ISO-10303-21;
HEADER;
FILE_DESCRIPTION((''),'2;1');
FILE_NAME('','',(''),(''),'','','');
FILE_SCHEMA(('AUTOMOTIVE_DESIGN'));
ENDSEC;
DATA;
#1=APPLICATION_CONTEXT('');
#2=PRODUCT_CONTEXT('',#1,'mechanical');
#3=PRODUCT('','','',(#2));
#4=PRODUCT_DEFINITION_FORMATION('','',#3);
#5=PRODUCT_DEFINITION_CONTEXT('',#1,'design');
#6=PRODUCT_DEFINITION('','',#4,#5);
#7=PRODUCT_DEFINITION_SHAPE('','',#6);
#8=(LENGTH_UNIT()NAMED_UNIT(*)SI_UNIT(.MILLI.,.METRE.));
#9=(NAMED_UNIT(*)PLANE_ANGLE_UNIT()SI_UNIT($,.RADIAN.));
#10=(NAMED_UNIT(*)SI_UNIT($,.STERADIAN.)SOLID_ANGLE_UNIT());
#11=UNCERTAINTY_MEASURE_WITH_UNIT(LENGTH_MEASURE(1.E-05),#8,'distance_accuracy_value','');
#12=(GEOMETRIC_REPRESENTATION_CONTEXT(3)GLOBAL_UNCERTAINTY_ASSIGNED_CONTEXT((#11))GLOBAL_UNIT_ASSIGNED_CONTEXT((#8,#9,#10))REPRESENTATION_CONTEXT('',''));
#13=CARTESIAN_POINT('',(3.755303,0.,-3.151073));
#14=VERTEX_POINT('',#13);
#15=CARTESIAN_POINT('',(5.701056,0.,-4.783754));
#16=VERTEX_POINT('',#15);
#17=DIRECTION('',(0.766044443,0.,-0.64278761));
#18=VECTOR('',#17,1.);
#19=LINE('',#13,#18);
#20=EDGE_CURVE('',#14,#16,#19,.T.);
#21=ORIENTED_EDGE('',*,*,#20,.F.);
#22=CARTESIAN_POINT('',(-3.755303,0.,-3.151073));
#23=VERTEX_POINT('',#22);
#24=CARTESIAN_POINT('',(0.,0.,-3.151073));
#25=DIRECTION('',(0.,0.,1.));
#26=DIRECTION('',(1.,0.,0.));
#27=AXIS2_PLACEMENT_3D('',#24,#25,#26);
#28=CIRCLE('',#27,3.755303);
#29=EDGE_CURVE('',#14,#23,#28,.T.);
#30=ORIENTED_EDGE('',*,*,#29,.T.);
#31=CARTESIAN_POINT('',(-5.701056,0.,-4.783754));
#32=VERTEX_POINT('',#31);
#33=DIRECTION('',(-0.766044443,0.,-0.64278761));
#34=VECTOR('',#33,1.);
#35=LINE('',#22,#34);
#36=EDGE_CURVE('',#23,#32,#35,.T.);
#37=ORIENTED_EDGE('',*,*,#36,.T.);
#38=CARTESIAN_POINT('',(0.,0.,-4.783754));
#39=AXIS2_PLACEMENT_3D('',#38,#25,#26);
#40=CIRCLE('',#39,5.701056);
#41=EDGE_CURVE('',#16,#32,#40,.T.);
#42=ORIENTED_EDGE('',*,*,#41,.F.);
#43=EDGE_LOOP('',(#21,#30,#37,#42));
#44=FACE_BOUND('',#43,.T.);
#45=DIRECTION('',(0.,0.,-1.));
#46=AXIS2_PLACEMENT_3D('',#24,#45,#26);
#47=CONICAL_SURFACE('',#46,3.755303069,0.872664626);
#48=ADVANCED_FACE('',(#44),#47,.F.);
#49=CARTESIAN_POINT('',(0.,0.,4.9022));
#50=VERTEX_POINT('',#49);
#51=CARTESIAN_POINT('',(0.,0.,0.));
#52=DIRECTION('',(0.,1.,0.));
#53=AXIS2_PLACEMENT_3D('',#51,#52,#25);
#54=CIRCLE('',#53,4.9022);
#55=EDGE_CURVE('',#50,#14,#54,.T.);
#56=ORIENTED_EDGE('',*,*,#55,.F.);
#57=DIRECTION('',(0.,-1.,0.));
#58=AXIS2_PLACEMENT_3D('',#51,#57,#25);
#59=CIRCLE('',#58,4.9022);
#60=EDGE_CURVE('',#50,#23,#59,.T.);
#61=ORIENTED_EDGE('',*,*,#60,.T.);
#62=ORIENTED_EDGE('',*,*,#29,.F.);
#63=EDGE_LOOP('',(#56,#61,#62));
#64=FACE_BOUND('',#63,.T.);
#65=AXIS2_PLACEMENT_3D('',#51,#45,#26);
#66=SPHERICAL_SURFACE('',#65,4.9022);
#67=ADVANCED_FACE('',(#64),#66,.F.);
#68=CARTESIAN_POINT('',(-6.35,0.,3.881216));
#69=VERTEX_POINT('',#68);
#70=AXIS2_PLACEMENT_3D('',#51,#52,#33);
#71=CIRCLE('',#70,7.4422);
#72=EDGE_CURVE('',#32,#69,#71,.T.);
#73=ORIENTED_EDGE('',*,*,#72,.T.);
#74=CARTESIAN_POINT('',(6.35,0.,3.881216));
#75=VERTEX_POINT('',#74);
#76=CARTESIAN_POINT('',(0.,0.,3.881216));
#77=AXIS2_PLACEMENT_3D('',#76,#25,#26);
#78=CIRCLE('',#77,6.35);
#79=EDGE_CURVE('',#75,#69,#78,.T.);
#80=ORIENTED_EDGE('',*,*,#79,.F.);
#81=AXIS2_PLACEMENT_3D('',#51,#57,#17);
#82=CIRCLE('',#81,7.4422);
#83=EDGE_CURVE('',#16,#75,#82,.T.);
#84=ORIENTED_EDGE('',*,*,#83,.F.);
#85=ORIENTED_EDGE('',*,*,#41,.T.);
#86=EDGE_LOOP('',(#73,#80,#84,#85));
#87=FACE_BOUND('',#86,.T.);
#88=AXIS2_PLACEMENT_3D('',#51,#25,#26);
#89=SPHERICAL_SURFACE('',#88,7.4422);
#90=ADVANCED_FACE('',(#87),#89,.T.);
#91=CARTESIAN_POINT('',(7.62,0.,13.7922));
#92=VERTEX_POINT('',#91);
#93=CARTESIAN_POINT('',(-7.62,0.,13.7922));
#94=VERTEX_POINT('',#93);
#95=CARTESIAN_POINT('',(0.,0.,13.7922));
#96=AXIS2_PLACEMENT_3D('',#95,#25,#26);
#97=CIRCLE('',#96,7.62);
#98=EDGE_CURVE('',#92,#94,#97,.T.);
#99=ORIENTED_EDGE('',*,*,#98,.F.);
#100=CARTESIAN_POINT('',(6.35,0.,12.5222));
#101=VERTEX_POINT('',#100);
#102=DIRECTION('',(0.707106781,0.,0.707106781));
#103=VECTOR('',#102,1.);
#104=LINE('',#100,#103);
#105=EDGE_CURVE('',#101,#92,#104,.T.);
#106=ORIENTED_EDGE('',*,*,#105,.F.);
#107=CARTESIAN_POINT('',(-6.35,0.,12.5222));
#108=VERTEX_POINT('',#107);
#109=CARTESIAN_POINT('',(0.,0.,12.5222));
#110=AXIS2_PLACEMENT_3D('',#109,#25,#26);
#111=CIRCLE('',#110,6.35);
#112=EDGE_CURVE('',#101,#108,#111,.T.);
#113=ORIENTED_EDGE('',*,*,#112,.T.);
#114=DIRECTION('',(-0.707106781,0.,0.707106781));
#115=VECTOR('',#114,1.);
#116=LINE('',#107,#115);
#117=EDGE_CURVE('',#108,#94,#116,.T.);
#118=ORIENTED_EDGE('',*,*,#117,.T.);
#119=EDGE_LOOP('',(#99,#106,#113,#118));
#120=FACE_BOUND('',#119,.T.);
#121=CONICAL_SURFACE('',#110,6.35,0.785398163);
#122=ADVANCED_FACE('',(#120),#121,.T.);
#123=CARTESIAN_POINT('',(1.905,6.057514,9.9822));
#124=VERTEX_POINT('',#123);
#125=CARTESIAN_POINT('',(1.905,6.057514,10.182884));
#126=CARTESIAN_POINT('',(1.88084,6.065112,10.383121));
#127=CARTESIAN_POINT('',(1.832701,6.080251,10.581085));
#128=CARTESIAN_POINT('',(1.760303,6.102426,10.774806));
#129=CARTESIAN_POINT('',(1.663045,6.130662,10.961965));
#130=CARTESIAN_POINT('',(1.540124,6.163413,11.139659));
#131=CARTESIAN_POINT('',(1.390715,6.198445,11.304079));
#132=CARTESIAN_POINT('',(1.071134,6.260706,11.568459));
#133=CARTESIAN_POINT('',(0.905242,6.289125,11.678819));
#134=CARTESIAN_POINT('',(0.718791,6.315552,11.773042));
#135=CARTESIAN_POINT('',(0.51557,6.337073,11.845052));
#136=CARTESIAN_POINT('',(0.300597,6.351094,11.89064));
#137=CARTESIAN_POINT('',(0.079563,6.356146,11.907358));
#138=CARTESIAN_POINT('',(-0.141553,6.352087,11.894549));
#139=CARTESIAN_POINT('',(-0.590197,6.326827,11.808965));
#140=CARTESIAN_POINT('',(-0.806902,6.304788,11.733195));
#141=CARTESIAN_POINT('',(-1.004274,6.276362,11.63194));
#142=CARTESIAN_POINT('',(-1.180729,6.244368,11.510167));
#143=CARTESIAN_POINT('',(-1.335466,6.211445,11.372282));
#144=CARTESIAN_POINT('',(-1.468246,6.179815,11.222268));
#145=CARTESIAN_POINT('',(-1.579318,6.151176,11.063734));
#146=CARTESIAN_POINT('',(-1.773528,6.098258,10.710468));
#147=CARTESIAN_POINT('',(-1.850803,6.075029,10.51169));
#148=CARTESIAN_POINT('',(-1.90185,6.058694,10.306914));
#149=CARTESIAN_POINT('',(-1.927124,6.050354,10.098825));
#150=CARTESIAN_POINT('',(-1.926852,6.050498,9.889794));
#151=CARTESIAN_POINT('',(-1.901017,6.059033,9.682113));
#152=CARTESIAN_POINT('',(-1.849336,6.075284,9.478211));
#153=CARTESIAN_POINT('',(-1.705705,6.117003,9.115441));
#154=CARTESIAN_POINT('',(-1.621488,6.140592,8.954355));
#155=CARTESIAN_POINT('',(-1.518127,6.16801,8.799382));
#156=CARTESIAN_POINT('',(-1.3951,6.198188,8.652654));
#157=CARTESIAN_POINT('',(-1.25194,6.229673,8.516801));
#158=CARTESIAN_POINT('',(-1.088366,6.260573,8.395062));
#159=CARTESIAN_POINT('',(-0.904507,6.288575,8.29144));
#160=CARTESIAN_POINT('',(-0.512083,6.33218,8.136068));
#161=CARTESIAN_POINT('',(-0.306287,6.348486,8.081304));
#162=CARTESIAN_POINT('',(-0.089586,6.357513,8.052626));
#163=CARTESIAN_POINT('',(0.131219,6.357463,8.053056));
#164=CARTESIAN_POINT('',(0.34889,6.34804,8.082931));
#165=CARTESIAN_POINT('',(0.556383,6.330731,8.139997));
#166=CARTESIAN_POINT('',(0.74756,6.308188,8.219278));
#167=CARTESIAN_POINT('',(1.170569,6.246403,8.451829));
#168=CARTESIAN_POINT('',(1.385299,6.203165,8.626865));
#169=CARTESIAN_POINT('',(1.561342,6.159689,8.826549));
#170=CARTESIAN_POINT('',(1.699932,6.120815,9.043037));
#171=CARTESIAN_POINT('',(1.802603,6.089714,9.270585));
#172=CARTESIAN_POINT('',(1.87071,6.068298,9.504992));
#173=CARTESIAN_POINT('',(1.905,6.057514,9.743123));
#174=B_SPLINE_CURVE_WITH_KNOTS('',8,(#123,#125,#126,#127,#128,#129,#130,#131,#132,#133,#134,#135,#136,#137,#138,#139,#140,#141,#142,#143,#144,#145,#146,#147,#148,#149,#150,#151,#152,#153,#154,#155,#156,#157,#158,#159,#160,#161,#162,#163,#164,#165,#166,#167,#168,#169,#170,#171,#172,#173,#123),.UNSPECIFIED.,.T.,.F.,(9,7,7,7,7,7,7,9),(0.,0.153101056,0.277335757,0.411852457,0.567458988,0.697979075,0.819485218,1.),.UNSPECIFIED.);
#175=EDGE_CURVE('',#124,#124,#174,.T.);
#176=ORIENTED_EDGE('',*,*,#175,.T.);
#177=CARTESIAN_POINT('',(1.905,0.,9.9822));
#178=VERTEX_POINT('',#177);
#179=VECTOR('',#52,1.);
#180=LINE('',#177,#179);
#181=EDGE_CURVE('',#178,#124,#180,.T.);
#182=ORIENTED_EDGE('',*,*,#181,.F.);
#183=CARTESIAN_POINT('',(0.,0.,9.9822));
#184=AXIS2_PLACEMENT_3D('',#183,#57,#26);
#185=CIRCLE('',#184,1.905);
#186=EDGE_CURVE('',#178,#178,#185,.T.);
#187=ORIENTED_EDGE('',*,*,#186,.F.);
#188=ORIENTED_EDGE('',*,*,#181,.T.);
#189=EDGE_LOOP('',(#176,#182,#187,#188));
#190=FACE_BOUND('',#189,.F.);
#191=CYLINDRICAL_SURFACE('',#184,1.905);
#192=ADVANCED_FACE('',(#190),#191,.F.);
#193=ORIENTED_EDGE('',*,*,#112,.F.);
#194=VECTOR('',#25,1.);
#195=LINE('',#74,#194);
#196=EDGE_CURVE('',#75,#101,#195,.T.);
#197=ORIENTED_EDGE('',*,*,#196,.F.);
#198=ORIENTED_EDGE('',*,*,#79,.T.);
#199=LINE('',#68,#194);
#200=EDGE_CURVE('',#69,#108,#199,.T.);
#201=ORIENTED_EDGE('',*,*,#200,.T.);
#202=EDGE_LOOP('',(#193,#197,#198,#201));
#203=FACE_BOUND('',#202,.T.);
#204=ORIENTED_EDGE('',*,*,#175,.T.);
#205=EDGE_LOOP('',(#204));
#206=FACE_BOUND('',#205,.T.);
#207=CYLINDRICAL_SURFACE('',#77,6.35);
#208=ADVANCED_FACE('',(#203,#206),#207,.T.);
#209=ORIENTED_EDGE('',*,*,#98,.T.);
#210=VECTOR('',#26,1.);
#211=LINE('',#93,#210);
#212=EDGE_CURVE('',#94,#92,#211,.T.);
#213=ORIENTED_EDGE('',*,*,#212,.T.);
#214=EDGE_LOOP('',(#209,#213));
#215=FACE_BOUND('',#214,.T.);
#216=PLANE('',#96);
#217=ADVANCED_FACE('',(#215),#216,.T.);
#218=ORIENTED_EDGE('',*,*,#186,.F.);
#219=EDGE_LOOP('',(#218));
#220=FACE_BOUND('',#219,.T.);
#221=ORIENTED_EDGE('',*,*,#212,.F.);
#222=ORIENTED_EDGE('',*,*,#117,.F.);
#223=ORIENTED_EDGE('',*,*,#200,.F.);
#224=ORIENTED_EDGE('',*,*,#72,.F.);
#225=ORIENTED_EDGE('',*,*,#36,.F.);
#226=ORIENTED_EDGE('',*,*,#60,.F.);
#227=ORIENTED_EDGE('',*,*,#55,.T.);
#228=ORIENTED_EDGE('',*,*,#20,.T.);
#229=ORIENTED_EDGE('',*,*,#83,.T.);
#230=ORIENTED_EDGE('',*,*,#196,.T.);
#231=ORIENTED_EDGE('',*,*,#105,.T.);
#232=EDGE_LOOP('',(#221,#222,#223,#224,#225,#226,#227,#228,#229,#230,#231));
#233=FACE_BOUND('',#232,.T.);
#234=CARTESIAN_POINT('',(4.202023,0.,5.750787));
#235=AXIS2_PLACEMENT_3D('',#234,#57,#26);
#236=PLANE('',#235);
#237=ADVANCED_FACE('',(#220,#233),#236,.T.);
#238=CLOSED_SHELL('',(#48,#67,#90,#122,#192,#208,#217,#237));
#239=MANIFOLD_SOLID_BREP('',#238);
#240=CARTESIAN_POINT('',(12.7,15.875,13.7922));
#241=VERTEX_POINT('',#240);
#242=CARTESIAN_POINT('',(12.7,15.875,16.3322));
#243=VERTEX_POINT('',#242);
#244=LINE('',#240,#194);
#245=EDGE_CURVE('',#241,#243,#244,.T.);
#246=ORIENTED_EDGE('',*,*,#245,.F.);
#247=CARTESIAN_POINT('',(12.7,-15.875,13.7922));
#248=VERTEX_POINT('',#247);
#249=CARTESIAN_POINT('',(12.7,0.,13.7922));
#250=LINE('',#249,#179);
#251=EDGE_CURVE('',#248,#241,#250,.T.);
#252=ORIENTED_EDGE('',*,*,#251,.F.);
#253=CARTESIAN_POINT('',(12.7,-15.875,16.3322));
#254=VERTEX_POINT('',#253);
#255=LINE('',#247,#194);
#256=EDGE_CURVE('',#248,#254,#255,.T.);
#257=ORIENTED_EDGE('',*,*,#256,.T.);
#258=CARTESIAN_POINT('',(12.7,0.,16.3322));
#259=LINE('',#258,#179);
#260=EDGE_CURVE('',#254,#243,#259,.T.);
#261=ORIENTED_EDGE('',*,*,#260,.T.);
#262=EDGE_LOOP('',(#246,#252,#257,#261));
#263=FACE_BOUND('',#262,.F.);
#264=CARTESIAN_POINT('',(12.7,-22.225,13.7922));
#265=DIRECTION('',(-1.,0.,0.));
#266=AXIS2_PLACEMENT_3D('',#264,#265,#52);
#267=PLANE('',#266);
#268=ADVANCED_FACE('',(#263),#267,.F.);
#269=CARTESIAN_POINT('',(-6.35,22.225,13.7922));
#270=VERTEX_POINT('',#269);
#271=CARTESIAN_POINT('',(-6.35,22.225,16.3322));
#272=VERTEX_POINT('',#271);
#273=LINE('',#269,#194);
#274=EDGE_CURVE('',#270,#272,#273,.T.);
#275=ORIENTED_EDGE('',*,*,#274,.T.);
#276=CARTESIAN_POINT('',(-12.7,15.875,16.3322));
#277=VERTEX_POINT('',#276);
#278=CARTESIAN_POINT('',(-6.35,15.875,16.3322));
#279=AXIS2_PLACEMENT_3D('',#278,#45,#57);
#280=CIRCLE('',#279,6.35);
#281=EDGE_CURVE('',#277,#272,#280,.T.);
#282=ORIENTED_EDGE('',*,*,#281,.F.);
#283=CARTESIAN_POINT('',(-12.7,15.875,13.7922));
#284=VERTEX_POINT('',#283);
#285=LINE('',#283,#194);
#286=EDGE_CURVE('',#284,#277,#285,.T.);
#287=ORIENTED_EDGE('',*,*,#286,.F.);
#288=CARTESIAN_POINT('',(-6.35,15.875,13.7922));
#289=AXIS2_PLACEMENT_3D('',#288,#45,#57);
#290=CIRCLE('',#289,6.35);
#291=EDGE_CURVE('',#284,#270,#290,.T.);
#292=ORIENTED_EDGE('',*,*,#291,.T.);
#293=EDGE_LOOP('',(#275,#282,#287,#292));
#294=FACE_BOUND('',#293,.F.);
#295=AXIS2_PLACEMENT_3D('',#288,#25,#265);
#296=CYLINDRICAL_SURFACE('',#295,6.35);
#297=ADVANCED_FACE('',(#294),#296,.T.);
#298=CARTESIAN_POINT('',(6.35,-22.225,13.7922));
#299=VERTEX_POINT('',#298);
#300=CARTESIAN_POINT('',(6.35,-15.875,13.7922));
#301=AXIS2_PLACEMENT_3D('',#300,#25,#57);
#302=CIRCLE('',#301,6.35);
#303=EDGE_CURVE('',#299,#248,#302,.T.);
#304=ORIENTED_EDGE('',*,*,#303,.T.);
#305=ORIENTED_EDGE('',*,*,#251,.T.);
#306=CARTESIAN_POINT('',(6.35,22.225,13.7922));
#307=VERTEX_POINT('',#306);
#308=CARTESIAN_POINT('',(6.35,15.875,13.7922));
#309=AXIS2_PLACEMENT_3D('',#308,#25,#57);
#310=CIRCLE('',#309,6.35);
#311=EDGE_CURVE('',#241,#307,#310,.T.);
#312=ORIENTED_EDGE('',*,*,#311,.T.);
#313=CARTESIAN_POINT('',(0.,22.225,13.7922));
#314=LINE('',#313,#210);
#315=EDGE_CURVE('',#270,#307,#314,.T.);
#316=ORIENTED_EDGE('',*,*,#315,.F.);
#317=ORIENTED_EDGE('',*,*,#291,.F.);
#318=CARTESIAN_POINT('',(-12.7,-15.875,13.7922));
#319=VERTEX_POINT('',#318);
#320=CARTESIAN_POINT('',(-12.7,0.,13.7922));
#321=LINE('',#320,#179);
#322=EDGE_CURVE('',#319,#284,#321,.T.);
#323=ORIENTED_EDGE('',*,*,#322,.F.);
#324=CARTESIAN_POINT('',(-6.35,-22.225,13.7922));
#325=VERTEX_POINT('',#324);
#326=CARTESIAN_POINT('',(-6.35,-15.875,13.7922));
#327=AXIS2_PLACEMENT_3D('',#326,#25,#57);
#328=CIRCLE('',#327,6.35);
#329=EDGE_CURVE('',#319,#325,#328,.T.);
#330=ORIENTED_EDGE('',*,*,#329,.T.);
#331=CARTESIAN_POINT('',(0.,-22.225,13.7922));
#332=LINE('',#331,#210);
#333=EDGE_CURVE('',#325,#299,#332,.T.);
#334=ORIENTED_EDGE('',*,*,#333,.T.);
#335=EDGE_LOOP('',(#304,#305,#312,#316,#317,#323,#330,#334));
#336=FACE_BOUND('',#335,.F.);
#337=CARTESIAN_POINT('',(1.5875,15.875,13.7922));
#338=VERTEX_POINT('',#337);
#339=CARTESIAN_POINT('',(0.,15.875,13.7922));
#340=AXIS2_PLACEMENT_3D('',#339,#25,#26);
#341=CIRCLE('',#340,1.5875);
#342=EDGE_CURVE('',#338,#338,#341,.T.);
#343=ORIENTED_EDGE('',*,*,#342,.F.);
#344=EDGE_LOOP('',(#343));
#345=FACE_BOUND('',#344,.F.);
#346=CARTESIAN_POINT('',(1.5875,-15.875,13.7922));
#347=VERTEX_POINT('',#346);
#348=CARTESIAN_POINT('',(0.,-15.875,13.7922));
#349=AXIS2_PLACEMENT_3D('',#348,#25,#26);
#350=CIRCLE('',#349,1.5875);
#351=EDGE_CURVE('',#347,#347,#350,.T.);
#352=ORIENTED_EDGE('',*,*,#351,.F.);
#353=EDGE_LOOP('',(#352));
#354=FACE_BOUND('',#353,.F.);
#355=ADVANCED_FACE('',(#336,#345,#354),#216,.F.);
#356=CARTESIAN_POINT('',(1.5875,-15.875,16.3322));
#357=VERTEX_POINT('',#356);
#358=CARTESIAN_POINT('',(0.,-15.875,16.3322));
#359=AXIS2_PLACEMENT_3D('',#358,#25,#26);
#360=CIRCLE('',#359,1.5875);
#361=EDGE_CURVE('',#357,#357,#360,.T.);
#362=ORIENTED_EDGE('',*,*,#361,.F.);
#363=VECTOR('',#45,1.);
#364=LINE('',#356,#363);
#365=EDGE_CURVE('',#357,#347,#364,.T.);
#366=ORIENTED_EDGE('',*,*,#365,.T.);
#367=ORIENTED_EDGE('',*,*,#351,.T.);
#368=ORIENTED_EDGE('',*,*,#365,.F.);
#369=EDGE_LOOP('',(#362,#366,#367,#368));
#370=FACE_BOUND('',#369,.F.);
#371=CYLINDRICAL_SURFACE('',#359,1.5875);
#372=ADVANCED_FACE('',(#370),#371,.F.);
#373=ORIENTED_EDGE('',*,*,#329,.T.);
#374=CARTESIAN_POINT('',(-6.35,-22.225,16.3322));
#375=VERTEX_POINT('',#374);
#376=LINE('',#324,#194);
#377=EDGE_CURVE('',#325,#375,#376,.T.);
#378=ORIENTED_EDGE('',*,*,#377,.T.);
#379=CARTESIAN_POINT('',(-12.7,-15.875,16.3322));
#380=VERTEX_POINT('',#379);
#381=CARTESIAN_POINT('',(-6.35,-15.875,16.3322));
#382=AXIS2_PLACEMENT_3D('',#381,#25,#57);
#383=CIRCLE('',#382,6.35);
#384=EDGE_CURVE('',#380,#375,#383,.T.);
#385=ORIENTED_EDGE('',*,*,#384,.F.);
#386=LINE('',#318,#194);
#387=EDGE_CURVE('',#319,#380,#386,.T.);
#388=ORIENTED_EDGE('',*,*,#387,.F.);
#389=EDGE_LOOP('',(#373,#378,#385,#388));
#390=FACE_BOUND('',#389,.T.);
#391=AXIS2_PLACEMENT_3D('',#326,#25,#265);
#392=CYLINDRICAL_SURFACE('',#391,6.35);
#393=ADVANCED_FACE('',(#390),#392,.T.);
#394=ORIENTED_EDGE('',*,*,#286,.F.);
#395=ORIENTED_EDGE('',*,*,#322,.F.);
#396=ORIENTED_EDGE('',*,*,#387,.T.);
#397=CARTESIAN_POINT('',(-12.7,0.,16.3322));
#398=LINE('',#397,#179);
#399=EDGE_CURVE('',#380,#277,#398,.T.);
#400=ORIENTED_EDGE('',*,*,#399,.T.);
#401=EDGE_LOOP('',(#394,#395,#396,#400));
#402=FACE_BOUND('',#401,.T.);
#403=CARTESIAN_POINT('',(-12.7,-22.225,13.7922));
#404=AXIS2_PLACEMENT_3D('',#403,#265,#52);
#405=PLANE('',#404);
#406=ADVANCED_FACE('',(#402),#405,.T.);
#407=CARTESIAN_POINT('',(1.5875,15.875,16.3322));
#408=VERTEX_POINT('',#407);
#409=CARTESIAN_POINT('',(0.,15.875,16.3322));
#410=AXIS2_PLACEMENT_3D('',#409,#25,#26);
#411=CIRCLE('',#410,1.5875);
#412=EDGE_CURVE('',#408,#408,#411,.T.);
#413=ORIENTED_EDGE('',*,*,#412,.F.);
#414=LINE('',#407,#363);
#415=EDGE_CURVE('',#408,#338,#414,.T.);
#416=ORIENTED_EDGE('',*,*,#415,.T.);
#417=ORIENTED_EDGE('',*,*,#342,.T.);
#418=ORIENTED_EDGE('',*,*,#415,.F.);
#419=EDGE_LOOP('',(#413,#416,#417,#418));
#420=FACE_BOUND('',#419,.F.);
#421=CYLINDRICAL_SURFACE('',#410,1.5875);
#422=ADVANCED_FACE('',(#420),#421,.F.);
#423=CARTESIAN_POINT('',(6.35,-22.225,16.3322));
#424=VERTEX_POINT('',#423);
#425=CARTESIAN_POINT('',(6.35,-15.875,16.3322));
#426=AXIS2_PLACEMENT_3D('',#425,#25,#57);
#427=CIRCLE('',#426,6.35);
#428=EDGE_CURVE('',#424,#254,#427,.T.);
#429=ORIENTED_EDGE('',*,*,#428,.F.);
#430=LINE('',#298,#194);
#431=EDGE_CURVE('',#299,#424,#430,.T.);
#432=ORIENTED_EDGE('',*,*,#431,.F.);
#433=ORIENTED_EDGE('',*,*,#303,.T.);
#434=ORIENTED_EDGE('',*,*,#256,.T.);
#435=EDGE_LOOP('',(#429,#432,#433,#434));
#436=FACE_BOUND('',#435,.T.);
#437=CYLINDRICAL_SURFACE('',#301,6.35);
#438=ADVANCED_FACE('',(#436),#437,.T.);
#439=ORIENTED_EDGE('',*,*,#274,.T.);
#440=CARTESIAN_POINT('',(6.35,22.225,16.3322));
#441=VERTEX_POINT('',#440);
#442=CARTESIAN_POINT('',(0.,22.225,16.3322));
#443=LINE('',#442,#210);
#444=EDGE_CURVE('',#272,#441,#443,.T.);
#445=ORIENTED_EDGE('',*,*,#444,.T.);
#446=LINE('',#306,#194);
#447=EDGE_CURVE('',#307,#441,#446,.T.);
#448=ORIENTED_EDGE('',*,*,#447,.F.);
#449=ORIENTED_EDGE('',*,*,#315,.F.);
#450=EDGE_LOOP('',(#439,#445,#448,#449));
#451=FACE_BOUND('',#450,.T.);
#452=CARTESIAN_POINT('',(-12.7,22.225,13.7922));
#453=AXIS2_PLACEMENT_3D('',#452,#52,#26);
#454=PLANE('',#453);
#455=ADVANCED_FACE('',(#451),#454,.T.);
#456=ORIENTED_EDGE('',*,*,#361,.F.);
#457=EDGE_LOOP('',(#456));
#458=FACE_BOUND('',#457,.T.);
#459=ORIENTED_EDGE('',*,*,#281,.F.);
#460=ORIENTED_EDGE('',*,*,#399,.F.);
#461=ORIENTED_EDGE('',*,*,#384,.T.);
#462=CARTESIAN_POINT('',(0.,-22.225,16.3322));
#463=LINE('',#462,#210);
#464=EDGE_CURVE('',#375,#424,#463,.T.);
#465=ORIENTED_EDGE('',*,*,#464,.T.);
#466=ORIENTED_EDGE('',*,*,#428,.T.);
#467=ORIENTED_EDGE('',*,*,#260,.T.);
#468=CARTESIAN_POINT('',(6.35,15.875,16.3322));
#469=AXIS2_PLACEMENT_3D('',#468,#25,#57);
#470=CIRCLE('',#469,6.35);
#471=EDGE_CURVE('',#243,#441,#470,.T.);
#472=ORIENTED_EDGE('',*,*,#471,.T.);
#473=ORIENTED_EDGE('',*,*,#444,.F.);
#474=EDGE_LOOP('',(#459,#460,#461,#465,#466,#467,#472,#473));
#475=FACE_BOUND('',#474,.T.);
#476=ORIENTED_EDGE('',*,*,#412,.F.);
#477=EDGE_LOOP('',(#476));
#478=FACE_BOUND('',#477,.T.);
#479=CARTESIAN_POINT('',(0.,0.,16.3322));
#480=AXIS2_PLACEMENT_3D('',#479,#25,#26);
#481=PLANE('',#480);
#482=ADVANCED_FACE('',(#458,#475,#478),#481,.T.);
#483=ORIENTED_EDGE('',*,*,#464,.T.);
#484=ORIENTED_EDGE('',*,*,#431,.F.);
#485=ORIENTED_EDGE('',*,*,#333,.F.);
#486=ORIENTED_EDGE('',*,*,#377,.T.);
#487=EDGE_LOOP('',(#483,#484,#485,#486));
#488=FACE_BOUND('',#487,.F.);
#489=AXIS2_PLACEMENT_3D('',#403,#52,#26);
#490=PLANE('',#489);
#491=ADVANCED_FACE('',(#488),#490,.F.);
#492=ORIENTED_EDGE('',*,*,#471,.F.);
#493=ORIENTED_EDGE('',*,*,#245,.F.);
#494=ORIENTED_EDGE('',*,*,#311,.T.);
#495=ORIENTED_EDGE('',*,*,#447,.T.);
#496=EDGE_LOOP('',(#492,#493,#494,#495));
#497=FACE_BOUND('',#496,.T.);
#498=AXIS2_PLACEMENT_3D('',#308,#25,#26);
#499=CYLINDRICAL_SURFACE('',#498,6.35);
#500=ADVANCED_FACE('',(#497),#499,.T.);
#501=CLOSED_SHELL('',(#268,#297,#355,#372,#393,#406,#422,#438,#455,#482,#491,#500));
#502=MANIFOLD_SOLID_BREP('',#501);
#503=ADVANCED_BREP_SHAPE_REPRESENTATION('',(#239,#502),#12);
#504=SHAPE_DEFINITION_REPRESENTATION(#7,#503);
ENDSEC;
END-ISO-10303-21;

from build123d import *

# Parameters (mm, degrees)
F1_ANGLE = 180
F3_R     = 1.905
F4_DEPTH = 7.621
F5_W     = 25.4
F5_H     = 44.45
F6_DEPTH = 2.54
F7_R     = 6.35
F8_R     = 1.5875
F9_DEPTH = 21.1169539488


with BuildPart() as f1:
    # F0 (on Front) → F1 (revolve)
    with BuildSketch(Plane.XZ):
        with BuildLine():
            ThreePointArc((0, 4.9022), (4.4429020336, 2.0717592427), (3.7553030691, -3.1510734202))
            Line((3.7553030691, -3.1510734202), (5.7010559546, -4.7837539488))
            ThreePointArc((5.7010559546, -4.7837539488), (7.4214159865, -0.5558107544), (6.35, 3.8812164124))
            Line((6.35, 3.8812164124), (6.35, 7.3025))
            Line((6.35, 7.3025), (6.35, 12.5222))
            Line((6.35, 12.5222), (7.62, 13.7922))
            Line((7.62, 13.7922), (6.35, 13.7922))
            Line((6.35, 13.7922), (0, 13.7922))
            Line((0, 13.7922), (0, 7.4422))
            Line((0, 7.4422), (0, 4.9022))
        make_face()
    revolve(axis=Axis((0, 0, 10.6172), (0, 0, 1)), revolution_arc=F1_ANGLE)

    # F3 (on face) → F4 (cut, through all)
    with BuildSketch(Plane.XZ):
        with Locations((0, 9.9822)):
            Circle(F3_R)
    extrude(amount=-F4_DEPTH, mode=Mode.SUBTRACT)


with BuildPart() as f6:
    # F5 (on face) → F6 (new body)
    with BuildSketch(Plane.XY.offset(13.7922)):
        Rectangle(F5_W, F5_H)
        with BuildLine():
            ThreePointArc((-7.62, 0), (0, 7.62), (7.62, 0))
            Line((7.62, 0), (-7.62, 0))
        make_face(mode=Mode.SUBTRACT)
        with BuildLine():
            Line((-7.62, 0), (7.62, 0))
            ThreePointArc((7.62, 0), (0, 7.62), (-7.62, 0))
        make_face()
    extrude(amount=F6_DEPTH)

    # F7
    f7_edges = [f6.edges().sort_by_distance(p)[0] for p in [
        (12.7, 22.225, 15.0622),
        (-12.7, 22.225, 15.0622),
        (-12.7, -22.225, 15.0622),
        (12.7, -22.225, 15.0622),
    ]]
    fillet(f7_edges, radius=F7_R)

    # F8 (on face) → F9 (cut, through all)
    with BuildSketch(Plane.XY.offset(16.3322)):
        with Locations((0, 15.875)):
            Circle(F8_R)
        with Locations((0, -15.875)):
            Circle(F8_R)
    extrude(amount=-F9_DEPTH, mode=Mode.SUBTRACT)


solid = Compound([f1.part, f6.part])
